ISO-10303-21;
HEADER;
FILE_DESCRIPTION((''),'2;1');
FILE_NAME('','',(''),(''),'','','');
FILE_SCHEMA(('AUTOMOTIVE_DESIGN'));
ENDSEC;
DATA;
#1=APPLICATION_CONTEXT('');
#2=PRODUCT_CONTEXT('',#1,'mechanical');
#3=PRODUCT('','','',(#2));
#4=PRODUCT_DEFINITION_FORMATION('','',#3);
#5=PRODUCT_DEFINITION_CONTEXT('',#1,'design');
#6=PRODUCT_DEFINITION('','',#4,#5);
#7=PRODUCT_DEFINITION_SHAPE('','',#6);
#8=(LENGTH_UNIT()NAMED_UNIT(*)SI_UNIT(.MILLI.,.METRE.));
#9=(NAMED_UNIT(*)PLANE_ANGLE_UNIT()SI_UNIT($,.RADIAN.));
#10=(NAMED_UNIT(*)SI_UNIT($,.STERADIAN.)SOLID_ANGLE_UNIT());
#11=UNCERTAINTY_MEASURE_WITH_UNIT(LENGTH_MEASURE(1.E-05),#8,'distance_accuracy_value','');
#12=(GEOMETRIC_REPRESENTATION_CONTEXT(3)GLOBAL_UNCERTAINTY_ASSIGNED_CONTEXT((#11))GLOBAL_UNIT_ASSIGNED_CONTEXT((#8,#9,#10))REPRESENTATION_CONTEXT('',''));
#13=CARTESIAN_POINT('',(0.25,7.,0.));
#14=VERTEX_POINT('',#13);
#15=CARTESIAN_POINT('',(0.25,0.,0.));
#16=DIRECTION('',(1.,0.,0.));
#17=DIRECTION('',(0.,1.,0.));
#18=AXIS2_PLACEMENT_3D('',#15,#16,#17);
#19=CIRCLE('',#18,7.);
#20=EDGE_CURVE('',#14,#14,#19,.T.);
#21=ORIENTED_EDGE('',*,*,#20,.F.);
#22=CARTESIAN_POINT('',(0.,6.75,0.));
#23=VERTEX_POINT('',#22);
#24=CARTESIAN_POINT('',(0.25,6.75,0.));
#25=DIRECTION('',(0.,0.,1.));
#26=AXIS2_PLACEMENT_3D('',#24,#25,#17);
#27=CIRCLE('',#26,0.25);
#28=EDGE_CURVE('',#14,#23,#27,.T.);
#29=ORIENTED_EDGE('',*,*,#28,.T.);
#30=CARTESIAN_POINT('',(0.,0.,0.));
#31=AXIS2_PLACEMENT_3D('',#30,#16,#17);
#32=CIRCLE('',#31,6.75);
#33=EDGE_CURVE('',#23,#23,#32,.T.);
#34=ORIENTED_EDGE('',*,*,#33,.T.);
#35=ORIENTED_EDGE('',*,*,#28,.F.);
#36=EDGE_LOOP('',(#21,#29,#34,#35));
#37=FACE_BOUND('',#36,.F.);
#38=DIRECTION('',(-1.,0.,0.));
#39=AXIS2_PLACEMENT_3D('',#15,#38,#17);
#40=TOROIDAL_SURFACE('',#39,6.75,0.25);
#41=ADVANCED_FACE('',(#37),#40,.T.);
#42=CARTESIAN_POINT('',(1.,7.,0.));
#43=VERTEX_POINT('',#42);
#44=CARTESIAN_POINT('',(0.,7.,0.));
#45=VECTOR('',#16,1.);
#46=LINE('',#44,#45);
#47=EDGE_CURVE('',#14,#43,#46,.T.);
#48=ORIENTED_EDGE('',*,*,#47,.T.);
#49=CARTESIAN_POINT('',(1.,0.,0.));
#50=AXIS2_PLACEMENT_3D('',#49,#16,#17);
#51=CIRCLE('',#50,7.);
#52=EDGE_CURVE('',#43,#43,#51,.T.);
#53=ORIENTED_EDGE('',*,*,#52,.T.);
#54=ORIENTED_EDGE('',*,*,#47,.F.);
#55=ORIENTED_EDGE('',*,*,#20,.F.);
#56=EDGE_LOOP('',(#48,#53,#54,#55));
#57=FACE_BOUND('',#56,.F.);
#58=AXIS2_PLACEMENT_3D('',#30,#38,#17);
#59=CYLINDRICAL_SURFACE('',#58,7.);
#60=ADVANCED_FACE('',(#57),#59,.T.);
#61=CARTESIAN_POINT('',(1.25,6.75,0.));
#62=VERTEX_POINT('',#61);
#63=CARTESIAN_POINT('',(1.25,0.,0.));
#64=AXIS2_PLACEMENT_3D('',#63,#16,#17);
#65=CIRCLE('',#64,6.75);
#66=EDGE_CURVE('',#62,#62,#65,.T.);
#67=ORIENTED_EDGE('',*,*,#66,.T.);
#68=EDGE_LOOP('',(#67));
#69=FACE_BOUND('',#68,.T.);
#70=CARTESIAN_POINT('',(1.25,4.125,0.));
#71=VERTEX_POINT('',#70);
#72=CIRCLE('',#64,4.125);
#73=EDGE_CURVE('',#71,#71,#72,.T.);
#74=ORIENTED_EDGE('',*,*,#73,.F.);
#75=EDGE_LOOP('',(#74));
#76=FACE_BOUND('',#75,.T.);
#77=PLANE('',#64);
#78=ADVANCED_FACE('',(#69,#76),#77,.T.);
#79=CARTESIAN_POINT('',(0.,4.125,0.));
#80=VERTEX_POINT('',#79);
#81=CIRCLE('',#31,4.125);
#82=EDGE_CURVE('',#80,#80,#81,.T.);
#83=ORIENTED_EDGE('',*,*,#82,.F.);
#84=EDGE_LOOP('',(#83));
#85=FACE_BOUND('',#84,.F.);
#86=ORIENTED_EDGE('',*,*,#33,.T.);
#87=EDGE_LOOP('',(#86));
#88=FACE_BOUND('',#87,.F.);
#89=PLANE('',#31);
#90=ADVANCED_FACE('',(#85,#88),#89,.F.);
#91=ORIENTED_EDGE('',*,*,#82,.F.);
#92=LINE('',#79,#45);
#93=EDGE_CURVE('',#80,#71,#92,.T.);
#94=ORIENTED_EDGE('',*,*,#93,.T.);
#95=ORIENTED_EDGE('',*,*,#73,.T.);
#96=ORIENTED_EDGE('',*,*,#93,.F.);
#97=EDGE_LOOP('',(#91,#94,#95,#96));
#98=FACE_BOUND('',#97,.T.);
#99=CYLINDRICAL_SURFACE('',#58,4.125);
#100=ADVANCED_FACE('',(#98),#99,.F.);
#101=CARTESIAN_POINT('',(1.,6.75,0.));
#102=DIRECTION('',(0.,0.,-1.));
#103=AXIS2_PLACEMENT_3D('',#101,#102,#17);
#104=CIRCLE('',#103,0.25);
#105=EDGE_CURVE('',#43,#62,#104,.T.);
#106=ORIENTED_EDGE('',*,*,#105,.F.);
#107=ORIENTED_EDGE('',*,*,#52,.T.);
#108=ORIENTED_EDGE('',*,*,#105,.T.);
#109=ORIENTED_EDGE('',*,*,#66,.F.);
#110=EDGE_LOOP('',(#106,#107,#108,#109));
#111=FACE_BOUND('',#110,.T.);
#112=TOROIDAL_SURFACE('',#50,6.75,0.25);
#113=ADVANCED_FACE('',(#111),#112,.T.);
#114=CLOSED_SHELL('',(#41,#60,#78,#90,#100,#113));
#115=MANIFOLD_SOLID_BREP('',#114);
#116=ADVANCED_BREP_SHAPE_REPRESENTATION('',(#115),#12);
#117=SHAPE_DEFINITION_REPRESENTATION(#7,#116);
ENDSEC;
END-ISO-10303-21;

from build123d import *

# Parameters (mm, degrees)
F0_R     = 7
F0_R_2   = 4.125
F1_DEPTH = 1.25
F3_R     = 0.25


# Not quite as in the source:
# - the program builds the solid bodies; features that only make, move or delete a surface that nothing else refers to are left out


with BuildPart() as f1:
    # F0 (on Right) → F1 (new body)
    with BuildSketch(Plane.YZ):
        Circle(F0_R)
        Circle(F0_R_2, mode=Mode.SUBTRACT)
    extrude(amount=F1_DEPTH)

    # F3
    f3_edges = [f1.edges().sort_by_distance(p)[0] for p in [
        (1.25, -7, 0),
        (0, -7, 0),
    ]]
    fillet(f3_edges, radius=F3_R)


solid = f1.part
